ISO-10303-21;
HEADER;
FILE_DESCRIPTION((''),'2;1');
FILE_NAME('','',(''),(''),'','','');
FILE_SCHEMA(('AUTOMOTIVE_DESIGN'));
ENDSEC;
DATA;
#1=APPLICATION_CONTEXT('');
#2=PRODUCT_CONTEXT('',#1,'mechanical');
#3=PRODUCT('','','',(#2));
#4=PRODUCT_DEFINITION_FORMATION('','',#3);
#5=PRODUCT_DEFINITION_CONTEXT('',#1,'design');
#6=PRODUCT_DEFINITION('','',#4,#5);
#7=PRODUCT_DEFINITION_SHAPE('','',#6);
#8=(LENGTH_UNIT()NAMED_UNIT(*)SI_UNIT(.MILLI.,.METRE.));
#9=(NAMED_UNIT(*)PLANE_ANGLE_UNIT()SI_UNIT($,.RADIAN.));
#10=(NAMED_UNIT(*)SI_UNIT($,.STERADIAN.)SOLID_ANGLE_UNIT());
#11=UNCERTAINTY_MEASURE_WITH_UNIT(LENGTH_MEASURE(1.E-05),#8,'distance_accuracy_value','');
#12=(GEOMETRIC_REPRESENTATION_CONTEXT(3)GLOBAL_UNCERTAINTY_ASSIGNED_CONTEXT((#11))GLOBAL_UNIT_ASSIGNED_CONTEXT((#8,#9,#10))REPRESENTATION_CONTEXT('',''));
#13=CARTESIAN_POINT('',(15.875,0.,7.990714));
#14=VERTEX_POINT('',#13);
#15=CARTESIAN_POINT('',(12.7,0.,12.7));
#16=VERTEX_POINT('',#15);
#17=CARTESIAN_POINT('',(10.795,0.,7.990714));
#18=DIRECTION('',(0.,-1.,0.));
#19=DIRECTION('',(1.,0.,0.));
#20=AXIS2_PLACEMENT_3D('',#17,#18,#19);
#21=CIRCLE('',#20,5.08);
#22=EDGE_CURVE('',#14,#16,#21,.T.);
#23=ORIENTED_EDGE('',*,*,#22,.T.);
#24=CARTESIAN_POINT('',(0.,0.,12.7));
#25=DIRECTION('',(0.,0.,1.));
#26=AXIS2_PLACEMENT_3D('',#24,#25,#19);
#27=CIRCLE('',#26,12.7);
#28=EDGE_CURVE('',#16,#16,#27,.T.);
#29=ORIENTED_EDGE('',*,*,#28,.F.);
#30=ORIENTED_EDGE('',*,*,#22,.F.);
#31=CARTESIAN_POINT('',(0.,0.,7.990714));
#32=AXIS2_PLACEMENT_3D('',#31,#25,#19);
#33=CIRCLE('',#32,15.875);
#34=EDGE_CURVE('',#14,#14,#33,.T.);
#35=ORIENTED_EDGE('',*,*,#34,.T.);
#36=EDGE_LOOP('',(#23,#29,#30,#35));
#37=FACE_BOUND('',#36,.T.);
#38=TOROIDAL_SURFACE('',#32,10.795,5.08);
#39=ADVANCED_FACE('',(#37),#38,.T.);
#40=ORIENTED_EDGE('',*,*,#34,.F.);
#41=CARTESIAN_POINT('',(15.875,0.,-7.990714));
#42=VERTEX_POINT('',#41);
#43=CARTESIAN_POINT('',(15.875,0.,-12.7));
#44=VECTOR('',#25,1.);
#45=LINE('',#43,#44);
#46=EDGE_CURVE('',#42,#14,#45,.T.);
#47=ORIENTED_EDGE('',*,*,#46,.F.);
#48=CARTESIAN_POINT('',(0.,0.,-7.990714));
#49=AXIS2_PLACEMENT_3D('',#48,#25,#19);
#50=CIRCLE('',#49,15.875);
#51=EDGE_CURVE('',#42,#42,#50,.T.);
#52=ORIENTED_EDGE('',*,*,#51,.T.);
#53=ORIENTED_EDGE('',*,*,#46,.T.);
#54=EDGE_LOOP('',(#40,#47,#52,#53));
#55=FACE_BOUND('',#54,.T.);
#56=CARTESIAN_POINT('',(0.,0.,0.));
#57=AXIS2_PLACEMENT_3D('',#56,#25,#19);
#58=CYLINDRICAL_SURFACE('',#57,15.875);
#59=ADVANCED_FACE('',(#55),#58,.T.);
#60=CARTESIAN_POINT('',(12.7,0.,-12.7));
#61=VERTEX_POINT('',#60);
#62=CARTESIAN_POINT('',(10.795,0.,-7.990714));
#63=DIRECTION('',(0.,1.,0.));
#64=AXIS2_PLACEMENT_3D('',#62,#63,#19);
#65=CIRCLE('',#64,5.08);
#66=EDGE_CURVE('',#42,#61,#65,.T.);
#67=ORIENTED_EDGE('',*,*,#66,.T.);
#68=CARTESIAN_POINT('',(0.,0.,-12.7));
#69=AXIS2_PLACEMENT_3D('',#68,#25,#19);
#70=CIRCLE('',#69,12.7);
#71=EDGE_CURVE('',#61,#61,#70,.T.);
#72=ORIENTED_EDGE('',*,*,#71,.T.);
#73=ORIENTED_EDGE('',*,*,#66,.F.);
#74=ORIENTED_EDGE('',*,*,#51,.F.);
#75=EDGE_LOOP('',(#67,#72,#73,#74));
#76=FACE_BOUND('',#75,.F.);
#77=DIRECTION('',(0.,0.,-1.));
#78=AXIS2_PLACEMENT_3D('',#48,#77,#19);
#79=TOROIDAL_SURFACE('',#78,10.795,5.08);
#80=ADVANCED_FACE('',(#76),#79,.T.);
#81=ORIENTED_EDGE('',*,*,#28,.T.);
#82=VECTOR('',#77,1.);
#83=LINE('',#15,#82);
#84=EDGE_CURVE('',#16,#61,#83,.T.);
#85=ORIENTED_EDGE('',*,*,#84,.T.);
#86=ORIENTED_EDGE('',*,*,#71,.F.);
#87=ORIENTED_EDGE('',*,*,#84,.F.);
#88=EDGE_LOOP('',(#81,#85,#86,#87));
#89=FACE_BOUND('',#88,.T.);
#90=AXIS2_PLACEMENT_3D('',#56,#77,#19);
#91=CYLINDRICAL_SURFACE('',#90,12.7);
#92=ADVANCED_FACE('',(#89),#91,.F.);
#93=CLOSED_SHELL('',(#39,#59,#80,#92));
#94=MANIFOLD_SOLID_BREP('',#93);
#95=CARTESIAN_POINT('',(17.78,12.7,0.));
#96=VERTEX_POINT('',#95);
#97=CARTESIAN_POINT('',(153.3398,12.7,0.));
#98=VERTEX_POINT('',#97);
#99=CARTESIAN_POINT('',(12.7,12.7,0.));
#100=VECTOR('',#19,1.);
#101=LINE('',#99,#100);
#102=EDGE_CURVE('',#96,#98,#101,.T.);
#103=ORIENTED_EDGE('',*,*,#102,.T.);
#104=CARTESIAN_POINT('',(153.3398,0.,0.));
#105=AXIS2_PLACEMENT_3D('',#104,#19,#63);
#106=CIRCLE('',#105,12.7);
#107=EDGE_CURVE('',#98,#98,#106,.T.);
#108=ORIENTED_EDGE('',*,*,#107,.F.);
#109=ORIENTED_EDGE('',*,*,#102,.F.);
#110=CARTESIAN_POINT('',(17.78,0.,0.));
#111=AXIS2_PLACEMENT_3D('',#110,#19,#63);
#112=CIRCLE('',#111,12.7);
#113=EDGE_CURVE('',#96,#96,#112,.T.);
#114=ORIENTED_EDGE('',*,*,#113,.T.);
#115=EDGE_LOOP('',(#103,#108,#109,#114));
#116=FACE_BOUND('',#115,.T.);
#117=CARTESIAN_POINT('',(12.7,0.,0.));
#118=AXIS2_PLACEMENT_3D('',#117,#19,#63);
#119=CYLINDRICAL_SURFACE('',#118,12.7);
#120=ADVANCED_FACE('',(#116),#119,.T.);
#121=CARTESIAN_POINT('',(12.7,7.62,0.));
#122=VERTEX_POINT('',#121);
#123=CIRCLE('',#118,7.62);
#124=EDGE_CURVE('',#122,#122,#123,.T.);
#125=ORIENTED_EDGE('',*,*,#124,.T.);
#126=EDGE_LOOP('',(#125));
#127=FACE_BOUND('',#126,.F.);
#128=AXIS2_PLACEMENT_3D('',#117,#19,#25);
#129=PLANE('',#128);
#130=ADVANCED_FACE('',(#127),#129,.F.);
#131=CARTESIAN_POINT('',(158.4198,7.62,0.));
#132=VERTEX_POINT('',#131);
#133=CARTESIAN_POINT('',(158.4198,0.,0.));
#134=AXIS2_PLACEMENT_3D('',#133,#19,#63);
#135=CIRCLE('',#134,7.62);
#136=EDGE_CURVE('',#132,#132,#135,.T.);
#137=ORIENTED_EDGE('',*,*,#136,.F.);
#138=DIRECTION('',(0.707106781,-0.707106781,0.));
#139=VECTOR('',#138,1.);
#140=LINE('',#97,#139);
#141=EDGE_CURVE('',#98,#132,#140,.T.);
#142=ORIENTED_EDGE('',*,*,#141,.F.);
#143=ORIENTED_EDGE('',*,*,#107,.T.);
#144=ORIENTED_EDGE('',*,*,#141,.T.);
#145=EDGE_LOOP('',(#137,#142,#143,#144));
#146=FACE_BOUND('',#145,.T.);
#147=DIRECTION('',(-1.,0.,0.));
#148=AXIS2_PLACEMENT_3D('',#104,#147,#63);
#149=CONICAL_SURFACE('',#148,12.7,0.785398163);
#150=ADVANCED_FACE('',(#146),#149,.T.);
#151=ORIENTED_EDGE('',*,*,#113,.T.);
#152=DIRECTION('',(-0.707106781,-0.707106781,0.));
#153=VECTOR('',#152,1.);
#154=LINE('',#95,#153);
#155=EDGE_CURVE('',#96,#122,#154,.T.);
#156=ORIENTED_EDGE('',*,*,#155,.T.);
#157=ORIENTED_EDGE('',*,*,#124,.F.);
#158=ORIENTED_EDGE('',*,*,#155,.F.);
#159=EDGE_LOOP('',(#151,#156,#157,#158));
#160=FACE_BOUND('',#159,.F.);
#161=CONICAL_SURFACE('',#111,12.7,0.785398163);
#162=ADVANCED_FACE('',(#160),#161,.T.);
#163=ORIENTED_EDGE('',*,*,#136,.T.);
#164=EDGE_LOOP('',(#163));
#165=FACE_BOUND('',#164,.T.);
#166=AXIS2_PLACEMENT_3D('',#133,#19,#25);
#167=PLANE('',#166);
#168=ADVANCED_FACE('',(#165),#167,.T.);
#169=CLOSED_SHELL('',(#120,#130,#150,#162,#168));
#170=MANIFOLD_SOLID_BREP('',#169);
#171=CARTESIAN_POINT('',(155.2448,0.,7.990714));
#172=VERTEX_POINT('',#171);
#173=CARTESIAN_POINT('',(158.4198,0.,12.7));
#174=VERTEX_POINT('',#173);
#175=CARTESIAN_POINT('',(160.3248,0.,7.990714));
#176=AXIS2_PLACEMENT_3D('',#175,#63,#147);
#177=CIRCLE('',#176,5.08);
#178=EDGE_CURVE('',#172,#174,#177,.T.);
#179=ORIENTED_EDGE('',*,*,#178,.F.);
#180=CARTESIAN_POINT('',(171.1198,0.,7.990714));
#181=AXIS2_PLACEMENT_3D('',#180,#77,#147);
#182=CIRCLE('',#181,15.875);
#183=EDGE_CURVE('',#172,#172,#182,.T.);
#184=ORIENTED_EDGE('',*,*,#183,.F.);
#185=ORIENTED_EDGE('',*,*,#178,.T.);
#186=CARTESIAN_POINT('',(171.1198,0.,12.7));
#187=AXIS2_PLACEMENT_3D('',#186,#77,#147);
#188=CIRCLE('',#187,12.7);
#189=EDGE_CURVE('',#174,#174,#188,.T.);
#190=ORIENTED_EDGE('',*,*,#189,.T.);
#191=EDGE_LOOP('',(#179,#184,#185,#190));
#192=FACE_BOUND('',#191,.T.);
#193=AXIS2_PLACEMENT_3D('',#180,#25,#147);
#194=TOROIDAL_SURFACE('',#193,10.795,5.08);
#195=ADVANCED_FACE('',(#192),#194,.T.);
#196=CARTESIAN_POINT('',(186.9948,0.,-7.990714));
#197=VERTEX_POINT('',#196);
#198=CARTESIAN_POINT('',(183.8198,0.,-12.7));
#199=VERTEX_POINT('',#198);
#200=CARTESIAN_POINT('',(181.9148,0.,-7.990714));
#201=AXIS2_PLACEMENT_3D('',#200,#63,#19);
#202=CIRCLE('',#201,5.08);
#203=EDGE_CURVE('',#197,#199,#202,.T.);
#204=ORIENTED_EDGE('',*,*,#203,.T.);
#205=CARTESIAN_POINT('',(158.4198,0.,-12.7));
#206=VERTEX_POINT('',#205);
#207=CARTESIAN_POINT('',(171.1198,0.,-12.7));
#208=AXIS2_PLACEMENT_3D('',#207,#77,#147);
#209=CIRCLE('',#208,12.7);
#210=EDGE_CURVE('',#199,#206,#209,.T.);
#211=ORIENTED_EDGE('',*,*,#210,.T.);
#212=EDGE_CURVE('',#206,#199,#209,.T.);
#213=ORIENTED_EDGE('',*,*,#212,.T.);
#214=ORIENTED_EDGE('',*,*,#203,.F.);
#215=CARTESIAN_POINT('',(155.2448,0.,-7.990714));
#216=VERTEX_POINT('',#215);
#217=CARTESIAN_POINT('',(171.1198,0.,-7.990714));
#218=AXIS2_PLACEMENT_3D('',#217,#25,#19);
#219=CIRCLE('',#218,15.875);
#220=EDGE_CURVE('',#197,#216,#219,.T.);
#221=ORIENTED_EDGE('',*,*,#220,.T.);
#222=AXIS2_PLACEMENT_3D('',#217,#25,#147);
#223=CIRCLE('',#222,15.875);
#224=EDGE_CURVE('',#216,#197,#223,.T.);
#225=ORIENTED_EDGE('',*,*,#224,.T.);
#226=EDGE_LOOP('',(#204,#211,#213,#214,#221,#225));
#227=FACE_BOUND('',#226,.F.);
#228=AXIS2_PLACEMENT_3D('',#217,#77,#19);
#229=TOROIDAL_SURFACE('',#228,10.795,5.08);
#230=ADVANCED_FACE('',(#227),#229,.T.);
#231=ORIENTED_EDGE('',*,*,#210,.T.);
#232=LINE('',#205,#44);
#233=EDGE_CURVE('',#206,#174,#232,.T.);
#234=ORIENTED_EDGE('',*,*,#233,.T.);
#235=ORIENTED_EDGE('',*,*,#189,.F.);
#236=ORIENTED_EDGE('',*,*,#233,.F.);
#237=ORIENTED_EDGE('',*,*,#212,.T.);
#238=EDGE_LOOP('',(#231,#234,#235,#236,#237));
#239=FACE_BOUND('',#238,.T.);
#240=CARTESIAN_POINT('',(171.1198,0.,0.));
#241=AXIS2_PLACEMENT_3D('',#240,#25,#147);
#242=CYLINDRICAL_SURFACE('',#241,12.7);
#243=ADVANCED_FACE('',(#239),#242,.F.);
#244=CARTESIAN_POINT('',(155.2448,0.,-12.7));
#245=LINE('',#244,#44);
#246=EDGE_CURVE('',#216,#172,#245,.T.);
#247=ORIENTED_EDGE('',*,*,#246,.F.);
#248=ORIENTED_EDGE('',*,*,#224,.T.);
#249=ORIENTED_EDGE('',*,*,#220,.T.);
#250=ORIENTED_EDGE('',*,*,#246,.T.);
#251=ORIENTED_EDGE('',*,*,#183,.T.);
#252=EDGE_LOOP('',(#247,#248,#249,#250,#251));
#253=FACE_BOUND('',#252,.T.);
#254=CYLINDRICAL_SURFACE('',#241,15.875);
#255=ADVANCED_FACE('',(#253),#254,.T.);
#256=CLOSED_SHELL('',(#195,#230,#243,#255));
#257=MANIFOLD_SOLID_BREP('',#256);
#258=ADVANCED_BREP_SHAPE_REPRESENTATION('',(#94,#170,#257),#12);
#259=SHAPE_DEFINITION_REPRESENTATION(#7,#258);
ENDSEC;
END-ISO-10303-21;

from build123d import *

# Parameters (mm, degrees)
F0_R          = 15.875
F0_R_2        = 12.7
F1_DEPTH      = 12.7
F3_R          = 12.7
F5_2_T2_ANGLE = 180
F5_2_T4_ANGLE = 180
F5_2_T6_ANGLE = 180
F5_2_T8_ANGLE = 180
F6_SIZE       = 5.08


# Not quite as in the source:
# - a fillet or chamfer that OpenCascade refuses, or shapes differently, is made with other operations: its cross-section is extruded or revolved along the edge and cut away or added


with BuildPart() as f1:
    # F0 (on Top) → F1 (new body, symmetric)
    with BuildSketch(Plane.XY):
        Circle(F0_R)
        Circle(F0_R_2, mode=Mode.SUBTRACT)
    extrude(amount=F1_DEPTH, both=True)

    # F5: fillet of radius 5.08 on 2 edges, made by hand

    # F5_s1 → F5_t2 (revolve, cut)
    with BuildSketch(Plane.XZ):
        with BuildLine():
            ThreePointArc((15.875, 7.9907139607), (15.0071134838, 10.8305202921), (12.7, 12.7))
            Line((12.7, 12.7), (15.875, 12.7))
            Line((15.875, 12.7), (15.875, 7.9907139607))
        make_face()
    revolve(axis=Axis((0, 0, 12.7), (0, 0, 1)), mode=Mode.SUBTRACT)

    # F5_s3 → F5_t4 (revolve, cut)
    with BuildSketch(Plane.XZ):
        with BuildLine():
            ThreePointArc((15.875, -7.9907139607), (15.0071134838, -10.8305202921), (12.7, -12.7))
            Line((12.7, -12.7), (15.875, -12.7))
            Line((15.875, -12.7), (15.875, -7.9907139607))
        make_face()
    revolve(axis=Axis((0, 0, -12.7), (0, 0, 1)), mode=Mode.SUBTRACT)


with BuildPart() as f1b:
    # F0 (on Top) → F1, piece 2 (new body, symmetric)
    with BuildSketch(Plane.XY):
        with BuildLine():
            ThreePointArc((186.9948, 0), (171.1198, 15.875), (155.2448, 0))
            ThreePointArc((155.2448, 0), (171.1198, -15.875), (186.9948, 0))
        make_face()
        with BuildLine():
            ThreePointArc((183.8198, 0), (171.1198, -12.7), (158.4198, 0))
            ThreePointArc((158.4198, 0), (171.1198, 12.7), (183.8198, 0))
        make_face(mode=Mode.SUBTRACT)
    extrude(amount=F1_DEPTH, both=True)

    # F5#2: fillet of radius 5.08 on 4 edges, made by hand

    # F5_2_s1 → F5_2_t2 (revolve, cut)
    with BuildSketch(Plane.XZ):
        with BuildLine():
            ThreePointArc((186.9948, 7.9907139607), (186.1269134838, 10.8305202921), (183.8198, 12.7))
            Line((183.8198, 12.7), (186.9948, 12.7))
            Line((186.9948, 12.7), (186.9948, 7.9907139607))
        make_face()
    revolve(axis=Axis((171.1198, 0, 12.7), (0, 0, 1)), revolution_arc=F5_2_T2_ANGLE, mode=Mode.SUBTRACT)

    # F5_2_s3 → F5_2_t4 (revolve, cut)
    with BuildSketch(Plane.XZ):
        with BuildLine():
            ThreePointArc((155.2448, 7.9907139607), (156.1126865162, 10.8305202921), (158.4198, 12.7))
            Line((158.4198, 12.7), (155.2448, 12.7))
            Line((155.2448, 12.7), (155.2448, 7.9907139607))
        make_face()
    revolve(axis=Axis((171.1198, 0, 12.7), (0, 0, 1)), revolution_arc=F5_2_T4_ANGLE, mode=Mode.SUBTRACT)

    # F5_2_s5 → F5_2_t6 (revolve, cut)
    with BuildSketch(Plane.XZ):
        with BuildLine():
            ThreePointArc((186.9948, -7.9907139607), (186.1269134838, -10.8305202921), (183.8198, -12.7))
            Line((183.8198, -12.7), (186.9948, -12.7))
            Line((186.9948, -12.7), (186.9948, -7.9907139607))
        make_face()
    revolve(axis=Axis((171.1198, 0, -12.7), (0, 0, 1)), revolution_arc=F5_2_T6_ANGLE, mode=Mode.SUBTRACT)

    # F5_2_s7 → F5_2_t8 (revolve, cut)
    with BuildSketch(Plane.XZ):
        with BuildLine():
            ThreePointArc((155.2448, -7.9907139607), (156.1126865162, -10.8305202921), (158.4198, -12.7))
            Line((158.4198, -12.7), (155.2448, -12.7))
            Line((155.2448, -12.7), (155.2448, -7.9907139607))
        make_face()
    revolve(axis=Axis((171.1198, 0, -12.7), (0, 0, 1)), revolution_arc=F5_2_T8_ANGLE, mode=Mode.SUBTRACT)


with BuildPart() as f4:
    # F4: sweep along a path in F0
    with BuildLine(Plane.XY) as f4_path:
        Line((12.7, 0), (15.875, 0))
        Line((15.875, 0), (155.2448, 0))
        Line((155.2448, 0), (158.4198, 0))
    # F3 (on offset) → F4 (sweep)
    with BuildSketch(Plane.YZ.offset(12.7)):
        Circle(F3_R)
    sweep(path=f4_path.line)

    # F6
    f6_edges = [f4.edges().sort_by_distance(p)[0] for p in [
        (158.4198, -12.7, 0),
        (12.7, -12.7, 0),
    ]]
    chamfer(f6_edges, length=F6_SIZE)


solid = Compound([f1.part, f1b.part, f4.part])
